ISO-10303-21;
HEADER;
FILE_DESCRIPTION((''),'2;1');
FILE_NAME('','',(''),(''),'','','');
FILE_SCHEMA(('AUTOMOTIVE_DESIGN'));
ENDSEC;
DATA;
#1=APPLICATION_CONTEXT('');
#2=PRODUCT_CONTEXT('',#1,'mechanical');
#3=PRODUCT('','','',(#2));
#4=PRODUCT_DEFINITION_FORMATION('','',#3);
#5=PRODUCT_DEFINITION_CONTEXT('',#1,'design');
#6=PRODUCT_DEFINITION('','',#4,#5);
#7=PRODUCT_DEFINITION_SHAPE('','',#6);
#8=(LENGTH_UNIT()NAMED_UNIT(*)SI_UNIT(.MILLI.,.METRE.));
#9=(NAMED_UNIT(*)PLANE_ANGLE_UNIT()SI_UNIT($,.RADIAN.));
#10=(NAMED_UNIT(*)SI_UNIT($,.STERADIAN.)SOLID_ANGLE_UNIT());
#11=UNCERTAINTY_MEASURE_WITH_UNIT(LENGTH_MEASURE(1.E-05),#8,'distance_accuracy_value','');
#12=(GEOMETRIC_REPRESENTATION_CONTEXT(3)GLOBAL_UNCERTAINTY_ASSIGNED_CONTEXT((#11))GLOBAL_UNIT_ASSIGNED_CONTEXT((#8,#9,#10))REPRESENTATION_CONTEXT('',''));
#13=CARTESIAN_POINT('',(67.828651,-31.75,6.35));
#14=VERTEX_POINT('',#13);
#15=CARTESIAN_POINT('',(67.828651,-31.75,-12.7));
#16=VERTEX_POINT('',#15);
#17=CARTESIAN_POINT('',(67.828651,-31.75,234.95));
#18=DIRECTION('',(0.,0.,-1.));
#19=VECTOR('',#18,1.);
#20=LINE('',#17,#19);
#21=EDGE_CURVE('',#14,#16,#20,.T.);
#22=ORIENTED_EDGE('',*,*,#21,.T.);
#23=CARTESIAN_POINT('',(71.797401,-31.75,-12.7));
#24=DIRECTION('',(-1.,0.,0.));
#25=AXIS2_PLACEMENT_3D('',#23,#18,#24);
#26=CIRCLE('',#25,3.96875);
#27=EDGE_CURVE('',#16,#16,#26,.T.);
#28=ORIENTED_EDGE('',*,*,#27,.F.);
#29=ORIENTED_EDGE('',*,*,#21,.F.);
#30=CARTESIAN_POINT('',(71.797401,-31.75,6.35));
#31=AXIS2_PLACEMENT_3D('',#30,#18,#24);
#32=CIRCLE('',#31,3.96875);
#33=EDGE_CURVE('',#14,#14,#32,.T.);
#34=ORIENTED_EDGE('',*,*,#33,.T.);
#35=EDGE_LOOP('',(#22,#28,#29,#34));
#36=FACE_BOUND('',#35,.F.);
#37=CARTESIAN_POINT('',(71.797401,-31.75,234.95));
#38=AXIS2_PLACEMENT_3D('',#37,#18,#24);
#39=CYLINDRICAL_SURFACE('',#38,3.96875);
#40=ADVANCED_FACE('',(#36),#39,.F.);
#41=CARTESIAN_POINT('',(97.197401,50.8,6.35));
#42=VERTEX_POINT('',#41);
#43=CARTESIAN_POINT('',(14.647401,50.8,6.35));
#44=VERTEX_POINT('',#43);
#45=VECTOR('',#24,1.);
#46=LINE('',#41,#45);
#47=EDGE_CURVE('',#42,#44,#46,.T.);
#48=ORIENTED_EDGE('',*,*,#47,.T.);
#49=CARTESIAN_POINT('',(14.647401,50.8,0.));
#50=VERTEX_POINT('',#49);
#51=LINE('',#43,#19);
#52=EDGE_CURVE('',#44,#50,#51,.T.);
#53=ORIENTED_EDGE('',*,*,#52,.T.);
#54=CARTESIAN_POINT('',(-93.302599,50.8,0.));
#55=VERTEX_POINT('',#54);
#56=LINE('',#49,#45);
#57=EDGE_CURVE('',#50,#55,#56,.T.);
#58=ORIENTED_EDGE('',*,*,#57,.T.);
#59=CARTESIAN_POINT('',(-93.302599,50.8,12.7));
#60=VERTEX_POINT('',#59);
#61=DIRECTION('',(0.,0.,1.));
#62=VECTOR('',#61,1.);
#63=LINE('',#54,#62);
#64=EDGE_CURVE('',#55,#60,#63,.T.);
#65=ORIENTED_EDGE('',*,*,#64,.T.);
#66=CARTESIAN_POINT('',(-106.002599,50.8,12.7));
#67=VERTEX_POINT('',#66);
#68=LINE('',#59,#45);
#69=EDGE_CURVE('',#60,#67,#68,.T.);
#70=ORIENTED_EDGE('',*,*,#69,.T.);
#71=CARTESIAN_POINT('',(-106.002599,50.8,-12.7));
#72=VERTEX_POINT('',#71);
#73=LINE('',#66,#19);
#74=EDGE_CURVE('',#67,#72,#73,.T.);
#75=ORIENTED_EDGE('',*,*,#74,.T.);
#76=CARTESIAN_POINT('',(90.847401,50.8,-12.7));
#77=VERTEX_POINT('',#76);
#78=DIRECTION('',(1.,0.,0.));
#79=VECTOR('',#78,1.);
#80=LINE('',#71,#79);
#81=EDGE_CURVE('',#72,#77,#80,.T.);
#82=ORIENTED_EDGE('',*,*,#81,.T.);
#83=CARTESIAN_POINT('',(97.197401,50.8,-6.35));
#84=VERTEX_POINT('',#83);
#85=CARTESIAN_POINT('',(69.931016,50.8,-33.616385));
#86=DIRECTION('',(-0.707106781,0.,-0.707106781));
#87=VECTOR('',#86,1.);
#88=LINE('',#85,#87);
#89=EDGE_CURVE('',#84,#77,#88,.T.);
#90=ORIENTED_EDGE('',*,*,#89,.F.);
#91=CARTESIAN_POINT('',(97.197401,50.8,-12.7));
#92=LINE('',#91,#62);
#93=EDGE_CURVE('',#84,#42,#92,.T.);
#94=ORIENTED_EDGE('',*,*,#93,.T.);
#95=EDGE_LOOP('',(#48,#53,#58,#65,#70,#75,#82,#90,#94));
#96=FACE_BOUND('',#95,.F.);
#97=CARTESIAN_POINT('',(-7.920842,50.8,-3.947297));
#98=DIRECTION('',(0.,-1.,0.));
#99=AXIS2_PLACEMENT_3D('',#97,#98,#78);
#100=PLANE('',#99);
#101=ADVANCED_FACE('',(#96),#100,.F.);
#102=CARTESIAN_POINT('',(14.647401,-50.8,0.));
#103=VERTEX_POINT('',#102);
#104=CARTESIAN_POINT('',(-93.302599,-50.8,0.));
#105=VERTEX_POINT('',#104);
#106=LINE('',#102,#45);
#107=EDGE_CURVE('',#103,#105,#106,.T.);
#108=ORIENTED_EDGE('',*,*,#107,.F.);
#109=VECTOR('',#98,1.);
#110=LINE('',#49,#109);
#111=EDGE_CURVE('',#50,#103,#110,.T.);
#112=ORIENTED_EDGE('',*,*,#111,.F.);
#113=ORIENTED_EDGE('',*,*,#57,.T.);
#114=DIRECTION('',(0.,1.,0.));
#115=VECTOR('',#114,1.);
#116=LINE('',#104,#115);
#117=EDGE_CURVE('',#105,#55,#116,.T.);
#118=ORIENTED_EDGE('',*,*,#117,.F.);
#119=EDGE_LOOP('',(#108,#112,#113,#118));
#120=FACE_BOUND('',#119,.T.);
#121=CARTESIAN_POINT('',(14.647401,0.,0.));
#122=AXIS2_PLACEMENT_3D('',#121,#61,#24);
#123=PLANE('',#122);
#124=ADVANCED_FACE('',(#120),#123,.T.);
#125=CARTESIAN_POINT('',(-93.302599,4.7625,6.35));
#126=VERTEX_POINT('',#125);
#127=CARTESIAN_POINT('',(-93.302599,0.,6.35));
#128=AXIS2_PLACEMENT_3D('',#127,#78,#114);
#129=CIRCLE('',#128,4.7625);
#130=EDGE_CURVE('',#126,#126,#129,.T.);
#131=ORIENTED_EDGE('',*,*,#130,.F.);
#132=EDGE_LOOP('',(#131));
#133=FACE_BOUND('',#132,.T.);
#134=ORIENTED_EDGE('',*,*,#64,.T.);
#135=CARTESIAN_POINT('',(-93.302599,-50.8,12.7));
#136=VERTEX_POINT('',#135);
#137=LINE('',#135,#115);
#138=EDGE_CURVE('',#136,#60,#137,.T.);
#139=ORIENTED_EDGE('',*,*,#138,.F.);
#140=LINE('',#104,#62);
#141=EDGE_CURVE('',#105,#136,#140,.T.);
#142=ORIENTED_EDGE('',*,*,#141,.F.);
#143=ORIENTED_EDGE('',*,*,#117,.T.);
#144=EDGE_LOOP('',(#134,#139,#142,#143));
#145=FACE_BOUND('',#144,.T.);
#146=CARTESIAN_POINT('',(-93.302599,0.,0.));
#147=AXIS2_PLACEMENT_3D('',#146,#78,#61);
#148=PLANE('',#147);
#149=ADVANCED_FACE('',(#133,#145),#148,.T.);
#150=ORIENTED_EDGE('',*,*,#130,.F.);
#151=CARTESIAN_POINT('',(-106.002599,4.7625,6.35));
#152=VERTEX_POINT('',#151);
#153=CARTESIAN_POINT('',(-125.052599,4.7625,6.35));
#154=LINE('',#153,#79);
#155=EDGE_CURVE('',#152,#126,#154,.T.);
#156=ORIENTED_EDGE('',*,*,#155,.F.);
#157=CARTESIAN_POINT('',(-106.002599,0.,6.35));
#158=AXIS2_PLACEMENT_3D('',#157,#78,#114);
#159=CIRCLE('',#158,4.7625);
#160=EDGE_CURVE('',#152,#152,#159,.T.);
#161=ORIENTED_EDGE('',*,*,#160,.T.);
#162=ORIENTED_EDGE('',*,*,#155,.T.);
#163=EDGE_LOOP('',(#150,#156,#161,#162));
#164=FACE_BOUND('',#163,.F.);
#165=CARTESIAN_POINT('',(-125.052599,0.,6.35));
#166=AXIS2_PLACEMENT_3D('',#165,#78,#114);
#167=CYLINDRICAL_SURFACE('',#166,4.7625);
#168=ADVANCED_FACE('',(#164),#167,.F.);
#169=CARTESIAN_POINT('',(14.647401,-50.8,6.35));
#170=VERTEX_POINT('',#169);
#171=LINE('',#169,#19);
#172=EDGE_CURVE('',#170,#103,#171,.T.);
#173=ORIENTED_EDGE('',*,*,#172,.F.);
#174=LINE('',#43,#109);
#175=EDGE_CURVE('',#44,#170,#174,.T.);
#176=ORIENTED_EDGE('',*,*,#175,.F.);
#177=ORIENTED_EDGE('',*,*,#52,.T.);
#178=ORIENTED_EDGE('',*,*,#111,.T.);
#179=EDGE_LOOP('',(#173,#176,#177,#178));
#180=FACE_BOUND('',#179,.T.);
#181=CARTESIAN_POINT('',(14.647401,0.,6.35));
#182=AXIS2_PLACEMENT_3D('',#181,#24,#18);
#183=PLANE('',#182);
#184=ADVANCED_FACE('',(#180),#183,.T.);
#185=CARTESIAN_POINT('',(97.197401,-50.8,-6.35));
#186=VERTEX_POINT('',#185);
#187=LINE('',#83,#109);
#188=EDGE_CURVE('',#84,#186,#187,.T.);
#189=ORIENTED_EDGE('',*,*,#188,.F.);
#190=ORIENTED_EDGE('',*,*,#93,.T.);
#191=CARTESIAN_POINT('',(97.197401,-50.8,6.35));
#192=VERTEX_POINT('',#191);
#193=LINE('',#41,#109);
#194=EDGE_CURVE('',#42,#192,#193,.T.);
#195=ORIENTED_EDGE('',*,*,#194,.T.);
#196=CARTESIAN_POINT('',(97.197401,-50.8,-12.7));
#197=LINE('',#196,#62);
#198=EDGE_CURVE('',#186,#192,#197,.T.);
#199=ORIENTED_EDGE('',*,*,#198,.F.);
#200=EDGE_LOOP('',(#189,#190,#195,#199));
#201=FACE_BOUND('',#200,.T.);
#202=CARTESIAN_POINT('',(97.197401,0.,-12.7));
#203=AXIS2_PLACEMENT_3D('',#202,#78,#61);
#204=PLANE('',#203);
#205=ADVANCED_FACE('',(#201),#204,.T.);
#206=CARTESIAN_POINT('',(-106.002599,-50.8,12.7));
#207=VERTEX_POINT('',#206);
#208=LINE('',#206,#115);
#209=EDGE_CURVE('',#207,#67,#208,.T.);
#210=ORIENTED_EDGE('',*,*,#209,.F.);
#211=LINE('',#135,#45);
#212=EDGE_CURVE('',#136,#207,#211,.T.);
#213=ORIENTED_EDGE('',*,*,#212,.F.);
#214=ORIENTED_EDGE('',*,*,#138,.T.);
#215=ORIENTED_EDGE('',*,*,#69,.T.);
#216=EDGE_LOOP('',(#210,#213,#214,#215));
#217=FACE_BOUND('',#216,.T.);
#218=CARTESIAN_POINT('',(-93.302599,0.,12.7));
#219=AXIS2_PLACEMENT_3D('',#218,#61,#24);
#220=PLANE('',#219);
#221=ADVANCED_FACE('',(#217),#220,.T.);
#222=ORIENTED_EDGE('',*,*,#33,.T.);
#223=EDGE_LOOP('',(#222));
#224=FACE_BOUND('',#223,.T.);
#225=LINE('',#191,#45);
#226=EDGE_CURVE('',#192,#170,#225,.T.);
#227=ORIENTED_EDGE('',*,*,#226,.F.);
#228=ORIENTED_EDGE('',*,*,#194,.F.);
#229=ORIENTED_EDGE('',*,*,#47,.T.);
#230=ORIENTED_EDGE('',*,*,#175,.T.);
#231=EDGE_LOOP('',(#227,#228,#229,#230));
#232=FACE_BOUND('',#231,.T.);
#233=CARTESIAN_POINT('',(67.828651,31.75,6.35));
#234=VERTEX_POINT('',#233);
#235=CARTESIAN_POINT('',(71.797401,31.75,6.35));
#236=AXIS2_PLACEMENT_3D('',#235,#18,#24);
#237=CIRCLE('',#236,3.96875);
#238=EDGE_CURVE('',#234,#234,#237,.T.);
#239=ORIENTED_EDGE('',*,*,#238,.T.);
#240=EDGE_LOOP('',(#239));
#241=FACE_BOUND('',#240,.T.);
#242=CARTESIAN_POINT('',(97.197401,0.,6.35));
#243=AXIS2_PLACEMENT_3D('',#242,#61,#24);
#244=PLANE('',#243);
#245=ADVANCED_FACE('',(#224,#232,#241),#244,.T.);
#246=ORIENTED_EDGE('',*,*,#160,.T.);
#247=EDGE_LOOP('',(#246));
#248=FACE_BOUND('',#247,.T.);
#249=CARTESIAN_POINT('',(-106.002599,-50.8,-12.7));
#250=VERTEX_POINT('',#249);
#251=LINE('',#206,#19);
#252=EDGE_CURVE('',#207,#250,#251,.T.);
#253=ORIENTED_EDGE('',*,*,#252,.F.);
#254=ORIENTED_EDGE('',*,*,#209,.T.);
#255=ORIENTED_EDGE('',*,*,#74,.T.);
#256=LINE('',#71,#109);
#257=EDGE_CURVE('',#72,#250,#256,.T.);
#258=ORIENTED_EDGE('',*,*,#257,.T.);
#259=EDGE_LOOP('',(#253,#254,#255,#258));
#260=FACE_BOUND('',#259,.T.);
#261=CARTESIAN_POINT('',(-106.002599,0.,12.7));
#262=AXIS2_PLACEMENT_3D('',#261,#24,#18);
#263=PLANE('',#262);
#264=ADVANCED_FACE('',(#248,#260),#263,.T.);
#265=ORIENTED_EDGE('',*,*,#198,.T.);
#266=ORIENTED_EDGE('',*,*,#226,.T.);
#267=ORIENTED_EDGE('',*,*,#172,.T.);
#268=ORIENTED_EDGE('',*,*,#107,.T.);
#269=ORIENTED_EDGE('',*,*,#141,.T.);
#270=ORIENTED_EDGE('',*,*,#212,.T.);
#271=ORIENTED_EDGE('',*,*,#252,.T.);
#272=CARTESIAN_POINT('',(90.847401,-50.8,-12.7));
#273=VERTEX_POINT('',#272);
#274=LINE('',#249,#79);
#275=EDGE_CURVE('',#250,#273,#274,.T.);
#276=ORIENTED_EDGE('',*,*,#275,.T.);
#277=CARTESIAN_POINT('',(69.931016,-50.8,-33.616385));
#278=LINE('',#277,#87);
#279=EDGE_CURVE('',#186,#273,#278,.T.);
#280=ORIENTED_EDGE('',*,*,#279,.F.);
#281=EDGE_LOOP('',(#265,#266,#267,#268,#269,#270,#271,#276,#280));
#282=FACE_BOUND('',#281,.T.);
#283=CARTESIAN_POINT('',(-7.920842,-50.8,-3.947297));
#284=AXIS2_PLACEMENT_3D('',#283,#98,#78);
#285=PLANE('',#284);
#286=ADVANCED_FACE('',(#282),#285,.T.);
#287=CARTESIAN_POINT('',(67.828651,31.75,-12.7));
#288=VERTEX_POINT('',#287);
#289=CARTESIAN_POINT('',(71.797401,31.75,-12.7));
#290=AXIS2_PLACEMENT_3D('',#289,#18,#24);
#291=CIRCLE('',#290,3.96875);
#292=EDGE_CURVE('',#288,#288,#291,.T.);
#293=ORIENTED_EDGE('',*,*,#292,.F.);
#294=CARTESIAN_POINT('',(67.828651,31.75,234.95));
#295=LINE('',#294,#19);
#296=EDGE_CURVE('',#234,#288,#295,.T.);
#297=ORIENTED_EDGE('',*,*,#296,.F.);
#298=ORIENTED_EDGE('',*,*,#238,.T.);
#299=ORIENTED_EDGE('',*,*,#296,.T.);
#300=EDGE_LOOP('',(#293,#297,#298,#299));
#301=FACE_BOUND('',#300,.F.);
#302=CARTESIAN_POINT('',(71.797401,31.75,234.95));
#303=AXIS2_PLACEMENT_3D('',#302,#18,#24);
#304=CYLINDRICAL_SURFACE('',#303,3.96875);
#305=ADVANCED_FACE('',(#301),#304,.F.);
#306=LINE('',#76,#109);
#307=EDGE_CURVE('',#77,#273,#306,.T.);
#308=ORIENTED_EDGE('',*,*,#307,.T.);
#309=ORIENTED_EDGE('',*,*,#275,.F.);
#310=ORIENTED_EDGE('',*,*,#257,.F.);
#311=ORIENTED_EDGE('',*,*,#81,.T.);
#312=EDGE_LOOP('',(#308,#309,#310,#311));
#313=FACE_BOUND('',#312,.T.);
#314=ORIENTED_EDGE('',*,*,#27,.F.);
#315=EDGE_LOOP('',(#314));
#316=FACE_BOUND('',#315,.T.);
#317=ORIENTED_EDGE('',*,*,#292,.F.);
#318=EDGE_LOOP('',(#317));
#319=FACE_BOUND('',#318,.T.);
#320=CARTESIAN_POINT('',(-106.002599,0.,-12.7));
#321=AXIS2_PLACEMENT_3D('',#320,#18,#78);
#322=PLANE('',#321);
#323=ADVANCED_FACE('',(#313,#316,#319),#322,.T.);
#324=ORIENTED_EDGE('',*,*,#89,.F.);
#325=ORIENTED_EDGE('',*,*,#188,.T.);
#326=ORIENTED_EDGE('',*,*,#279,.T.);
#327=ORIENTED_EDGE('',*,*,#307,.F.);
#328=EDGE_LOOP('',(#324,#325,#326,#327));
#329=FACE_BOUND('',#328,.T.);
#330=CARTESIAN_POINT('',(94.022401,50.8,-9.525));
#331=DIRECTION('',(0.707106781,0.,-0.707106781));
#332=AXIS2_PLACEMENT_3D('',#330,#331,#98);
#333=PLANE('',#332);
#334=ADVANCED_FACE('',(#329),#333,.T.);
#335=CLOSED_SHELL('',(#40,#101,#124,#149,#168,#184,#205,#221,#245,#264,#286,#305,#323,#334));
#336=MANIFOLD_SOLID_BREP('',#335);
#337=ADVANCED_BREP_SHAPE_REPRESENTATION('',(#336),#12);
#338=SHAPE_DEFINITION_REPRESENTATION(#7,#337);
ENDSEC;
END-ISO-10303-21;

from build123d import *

# Parameters (mm, degrees)
F1_DEPTH = 50.8
F2_SIZE  = 6.35
F4_D     = 7.9375
F6_D     = 9.525
F6_DEPTH = 19.05
F6_TIP   = 2.8615986981


# Not quite as in the source:
# - a length typed as a fraction of an inch, garbled in the dataset ("3 / 203.2 mm" for 3/8 in), is restored


with BuildPart() as f1:
    # F0 (on Front) → F1 (new body, symmetric)
    with BuildSketch(Plane.XZ):
        Polygon((-106.0025989716, 12.7), (-106.0025989716, -12.7), (97.1974010284, -12.7), (97.1974010284, 6.35), (14.6474010284, 6.35), (14.6474010284, 0), (-93.3025989716, 0), (-93.3025989716, 12.7), align=None)
    extrude(amount=F1_DEPTH, both=True)

    # F2
    f2_edges = [f1.edges().sort_by_distance(p)[0] for p in [
        (97.197401, 0, -12.7),
    ]]
    chamfer(f2_edges, length=F2_SIZE)

    # F4 (through all)
    with Locations(Plane.XY.offset(6.35)):
        with Locations((71.7974010284, 31.75), (71.7974010284, -31.75)):
            Hole(F4_D / 2)

    # F6
    with Locations(Plane(origin=(-106.0025989716, 0, 0), x_dir=(0, -1, 0), z_dir=(-1, 0, 0))):
        with Locations((0, 6.35)):
            Hole(F6_D / 2, depth=F6_DEPTH)
            with Locations((0, 0, -(F6_DEPTH + F6_TIP / 2))):  # 118° drill point
                Cone(0, F6_D / 2, F6_TIP, mode=Mode.SUBTRACT)


solid = f1.part
